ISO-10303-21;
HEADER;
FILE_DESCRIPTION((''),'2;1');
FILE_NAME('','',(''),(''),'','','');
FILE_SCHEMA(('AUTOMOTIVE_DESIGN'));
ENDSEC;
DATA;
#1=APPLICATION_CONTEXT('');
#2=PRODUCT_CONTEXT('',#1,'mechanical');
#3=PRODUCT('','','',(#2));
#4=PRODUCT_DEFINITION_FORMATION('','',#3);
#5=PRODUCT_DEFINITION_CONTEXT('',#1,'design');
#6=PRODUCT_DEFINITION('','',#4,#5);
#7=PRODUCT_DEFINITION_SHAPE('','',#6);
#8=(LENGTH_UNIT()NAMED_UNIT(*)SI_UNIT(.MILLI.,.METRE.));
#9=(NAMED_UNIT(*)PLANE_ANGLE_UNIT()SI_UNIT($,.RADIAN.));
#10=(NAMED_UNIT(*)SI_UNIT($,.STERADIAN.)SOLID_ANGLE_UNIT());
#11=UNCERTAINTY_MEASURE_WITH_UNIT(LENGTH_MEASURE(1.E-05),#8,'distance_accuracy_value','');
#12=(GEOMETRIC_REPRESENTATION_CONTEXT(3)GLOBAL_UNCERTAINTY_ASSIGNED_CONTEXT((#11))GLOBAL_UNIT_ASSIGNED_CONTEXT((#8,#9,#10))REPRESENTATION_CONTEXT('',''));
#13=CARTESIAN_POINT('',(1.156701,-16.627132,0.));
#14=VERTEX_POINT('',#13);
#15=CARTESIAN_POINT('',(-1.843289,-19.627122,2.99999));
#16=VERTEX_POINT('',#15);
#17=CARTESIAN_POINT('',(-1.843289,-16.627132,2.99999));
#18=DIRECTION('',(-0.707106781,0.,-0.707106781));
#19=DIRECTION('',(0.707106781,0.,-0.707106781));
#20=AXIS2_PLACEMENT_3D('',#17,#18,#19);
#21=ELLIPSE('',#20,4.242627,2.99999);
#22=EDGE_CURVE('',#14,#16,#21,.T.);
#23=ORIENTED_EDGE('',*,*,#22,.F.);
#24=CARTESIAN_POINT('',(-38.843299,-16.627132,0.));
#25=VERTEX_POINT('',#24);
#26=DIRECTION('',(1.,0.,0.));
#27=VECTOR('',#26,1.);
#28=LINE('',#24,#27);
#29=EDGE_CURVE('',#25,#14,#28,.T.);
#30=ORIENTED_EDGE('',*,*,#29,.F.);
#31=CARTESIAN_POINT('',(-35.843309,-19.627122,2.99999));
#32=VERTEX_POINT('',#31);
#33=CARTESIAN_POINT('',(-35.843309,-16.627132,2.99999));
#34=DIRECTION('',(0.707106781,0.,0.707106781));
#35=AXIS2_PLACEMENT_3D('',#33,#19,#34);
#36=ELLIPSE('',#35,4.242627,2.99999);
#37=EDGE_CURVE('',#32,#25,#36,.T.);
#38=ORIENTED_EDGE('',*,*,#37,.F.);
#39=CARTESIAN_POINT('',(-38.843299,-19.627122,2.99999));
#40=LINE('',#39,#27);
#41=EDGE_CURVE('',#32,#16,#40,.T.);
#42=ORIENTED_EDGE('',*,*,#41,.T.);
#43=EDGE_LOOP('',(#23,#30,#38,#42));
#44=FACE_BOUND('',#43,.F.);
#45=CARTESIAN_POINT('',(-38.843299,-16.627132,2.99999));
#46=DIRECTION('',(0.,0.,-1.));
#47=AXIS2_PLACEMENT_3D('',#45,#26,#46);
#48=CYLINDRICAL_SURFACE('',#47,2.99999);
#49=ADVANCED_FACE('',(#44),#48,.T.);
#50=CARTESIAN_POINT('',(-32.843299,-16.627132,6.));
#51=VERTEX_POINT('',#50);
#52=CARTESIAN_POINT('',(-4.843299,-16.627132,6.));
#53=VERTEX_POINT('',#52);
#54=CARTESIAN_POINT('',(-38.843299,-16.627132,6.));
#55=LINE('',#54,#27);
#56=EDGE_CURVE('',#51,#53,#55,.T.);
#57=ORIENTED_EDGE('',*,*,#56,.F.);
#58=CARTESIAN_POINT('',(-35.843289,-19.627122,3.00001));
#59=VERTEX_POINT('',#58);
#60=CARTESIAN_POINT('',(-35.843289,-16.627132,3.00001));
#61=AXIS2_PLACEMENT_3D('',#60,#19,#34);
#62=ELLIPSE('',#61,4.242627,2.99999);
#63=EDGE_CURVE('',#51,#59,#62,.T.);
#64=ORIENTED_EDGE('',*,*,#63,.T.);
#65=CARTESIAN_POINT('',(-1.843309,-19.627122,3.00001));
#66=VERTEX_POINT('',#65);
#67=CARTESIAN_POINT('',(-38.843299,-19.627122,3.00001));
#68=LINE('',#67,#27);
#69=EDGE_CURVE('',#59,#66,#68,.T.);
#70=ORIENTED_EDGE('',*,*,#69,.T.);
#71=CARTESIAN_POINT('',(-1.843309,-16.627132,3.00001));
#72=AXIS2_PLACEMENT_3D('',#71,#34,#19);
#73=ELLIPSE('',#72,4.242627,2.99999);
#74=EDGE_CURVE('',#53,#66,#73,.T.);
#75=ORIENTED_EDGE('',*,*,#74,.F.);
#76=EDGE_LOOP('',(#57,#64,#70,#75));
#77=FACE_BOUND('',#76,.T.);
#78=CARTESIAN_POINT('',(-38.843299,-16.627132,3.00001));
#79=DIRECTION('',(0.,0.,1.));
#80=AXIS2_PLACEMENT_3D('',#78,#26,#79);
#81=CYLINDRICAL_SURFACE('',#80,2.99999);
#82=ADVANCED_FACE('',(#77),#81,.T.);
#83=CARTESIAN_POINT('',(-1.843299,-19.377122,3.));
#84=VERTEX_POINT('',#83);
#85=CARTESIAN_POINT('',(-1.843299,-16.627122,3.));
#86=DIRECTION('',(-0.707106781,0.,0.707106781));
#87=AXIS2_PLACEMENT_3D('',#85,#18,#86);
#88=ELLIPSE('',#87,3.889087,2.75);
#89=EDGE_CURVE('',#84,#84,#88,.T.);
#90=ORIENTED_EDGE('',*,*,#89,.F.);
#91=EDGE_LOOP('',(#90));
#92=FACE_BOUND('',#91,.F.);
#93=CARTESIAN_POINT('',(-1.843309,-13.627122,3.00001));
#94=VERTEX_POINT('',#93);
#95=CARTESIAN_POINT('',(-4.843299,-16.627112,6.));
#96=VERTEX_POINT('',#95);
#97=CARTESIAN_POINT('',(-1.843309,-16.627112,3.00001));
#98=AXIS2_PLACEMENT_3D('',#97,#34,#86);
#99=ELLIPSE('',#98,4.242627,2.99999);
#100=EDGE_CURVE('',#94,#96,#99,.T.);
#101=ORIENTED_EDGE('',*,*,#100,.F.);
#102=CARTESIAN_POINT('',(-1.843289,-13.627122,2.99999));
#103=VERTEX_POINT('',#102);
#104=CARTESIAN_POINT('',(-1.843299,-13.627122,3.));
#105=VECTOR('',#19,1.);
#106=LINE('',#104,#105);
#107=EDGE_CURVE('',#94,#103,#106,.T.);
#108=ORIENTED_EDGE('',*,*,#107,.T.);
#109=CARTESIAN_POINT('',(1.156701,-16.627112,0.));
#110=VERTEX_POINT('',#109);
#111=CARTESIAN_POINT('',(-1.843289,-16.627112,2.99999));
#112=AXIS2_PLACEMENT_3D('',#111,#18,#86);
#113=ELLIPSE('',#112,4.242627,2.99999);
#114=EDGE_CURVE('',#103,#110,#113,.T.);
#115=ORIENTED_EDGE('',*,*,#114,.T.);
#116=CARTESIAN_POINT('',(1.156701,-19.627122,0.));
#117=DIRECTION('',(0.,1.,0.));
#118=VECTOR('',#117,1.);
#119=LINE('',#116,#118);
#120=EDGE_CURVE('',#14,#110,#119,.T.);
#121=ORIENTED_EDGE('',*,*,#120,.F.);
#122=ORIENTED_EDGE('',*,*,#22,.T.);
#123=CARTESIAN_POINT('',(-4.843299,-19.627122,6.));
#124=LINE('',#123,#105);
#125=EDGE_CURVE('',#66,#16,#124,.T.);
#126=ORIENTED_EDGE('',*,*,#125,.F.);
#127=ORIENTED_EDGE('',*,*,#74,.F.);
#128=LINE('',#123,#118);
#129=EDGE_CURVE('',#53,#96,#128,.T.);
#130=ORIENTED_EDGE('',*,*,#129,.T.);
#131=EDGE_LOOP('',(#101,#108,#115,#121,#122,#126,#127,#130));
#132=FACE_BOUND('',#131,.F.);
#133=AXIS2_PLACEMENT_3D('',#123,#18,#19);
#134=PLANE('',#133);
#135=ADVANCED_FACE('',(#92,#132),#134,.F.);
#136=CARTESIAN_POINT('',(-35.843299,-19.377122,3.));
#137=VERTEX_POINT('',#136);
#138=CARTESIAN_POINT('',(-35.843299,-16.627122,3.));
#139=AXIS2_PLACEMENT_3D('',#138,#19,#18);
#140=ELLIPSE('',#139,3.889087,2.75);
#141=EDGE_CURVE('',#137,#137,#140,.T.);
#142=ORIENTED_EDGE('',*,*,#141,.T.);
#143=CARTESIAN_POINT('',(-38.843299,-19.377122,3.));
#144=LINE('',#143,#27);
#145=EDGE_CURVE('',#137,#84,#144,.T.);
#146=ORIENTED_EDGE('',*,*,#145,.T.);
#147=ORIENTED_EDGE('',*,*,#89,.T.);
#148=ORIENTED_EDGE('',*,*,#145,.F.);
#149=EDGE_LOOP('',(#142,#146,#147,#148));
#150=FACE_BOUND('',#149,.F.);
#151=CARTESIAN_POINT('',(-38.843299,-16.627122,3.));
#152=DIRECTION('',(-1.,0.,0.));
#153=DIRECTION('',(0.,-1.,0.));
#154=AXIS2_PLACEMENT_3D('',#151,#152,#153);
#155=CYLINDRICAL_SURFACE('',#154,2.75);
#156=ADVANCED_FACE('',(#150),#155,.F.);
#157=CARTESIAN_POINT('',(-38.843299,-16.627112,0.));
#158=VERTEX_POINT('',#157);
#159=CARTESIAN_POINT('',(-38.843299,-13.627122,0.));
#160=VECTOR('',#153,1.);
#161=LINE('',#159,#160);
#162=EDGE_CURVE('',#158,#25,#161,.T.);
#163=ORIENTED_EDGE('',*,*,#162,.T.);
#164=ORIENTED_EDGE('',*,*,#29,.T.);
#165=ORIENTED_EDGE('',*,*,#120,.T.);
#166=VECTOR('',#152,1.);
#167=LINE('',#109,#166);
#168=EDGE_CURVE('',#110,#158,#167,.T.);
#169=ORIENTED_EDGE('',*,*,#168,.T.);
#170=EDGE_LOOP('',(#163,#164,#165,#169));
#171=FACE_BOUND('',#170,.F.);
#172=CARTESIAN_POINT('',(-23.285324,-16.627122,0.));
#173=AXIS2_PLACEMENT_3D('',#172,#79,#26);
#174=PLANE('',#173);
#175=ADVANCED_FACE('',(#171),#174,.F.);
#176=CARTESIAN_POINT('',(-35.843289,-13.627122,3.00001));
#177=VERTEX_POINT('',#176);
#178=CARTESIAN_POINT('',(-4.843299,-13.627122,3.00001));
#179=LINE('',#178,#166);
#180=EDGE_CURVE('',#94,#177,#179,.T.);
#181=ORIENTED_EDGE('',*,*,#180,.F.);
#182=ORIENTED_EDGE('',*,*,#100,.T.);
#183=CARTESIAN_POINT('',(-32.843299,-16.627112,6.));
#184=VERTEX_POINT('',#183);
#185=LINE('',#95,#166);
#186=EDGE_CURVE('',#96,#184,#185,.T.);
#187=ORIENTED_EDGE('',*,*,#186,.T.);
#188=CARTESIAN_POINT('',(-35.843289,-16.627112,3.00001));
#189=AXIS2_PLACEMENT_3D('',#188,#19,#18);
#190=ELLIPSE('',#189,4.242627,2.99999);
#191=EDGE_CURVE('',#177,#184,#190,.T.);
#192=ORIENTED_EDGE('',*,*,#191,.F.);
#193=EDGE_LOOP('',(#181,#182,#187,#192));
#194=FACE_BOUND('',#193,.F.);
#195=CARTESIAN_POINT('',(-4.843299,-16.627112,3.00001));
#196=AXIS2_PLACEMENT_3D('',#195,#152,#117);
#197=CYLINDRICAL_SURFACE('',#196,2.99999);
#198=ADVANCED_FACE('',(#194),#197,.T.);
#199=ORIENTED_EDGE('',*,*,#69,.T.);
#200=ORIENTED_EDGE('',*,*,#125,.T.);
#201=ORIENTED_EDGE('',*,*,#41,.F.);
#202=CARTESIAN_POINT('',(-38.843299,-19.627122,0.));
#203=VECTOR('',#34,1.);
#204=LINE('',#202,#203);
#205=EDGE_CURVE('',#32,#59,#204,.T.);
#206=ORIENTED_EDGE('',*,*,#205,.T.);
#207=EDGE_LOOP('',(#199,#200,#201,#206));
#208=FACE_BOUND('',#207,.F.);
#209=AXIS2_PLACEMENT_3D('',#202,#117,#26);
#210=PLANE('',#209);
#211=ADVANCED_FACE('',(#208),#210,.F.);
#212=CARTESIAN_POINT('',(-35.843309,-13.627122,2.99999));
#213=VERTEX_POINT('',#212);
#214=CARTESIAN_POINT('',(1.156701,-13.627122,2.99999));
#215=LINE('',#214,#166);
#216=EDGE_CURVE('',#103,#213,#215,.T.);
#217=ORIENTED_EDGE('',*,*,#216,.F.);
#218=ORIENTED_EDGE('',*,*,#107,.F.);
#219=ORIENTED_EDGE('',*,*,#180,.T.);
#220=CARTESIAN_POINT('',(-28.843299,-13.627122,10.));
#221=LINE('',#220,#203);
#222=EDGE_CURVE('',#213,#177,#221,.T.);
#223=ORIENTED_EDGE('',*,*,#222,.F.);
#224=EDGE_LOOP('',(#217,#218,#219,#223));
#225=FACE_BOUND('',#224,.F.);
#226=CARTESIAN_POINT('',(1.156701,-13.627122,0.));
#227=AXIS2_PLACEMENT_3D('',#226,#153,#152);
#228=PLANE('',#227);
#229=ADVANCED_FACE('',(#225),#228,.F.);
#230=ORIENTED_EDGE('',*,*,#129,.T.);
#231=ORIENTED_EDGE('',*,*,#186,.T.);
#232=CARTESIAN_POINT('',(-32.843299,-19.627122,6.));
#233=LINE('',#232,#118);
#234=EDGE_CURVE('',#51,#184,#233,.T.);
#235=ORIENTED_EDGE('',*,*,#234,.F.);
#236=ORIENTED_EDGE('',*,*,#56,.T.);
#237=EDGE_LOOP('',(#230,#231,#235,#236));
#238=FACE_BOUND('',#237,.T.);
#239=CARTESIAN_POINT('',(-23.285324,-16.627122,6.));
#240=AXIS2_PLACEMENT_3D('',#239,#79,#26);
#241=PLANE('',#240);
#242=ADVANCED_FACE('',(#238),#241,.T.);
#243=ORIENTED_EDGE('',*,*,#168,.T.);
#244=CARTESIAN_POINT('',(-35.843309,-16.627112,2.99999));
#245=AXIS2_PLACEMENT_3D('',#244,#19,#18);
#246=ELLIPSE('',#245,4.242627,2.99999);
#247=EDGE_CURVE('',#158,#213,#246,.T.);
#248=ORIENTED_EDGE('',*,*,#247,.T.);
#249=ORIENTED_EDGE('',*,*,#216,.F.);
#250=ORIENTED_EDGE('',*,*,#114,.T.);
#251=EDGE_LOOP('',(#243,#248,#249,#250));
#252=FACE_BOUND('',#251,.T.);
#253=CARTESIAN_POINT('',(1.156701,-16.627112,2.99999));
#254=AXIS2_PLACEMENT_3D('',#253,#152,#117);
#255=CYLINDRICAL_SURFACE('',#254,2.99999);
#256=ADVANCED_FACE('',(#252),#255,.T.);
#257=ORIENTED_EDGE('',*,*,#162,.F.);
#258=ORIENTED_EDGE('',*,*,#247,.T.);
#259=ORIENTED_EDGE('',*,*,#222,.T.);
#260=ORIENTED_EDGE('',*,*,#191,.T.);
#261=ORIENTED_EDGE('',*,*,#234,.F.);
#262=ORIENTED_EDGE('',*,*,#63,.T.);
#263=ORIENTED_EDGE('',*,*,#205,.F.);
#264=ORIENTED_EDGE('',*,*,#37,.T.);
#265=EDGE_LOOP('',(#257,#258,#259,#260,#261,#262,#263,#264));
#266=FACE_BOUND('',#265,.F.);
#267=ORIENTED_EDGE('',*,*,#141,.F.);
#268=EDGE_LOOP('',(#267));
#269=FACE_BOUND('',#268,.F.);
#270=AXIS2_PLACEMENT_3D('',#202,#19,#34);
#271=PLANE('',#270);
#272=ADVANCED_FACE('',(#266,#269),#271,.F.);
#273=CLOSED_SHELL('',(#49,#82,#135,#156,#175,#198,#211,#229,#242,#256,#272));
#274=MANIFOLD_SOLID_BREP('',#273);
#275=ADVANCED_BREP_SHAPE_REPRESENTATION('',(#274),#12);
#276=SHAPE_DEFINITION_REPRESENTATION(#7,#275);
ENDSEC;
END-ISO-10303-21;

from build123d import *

# Parameters (mm, degrees)
F1_DEPTH = 6
F3_DEPTH = 6.001
F4_R     = 2.75
F5_DEPTH = 40.001
F6_R     = 2.99999
F7_DEPTH = 6.001


# Not quite as in the source:
# - a fillet or chamfer is up to 0.001 mm smaller than in the source, because OpenCascade refuses the exact size


with BuildPart() as f1:
    # F0 (on Top) → F1 (new body)
    with BuildSketch(Plane.XY):
        with BuildLine():
            Line((-8.5178157315, -13.6271222085), (-38.8432986429, -13.6271222085))
            Line((-38.8432986429, -13.6271222085), (-38.8432986429, -19.6271222085))
            Line((-38.8432986429, -19.6271222085), (-8.5178157315, -19.6271222085))
            ThreePointArc((-8.5178157315, -19.6271222085), (-11.5178157315, -16.6271222085), (-8.5178157315, -13.6271222085))
        make_face()
        with BuildLine():
            Line((1.1567013571, -13.6271222085), (-8.5178157315, -13.6271222085))
            ThreePointArc((-8.5178157315, -13.6271222085), (-6.3964953879, -14.5058018649), (-5.5178157315, -16.6271222085))
            ThreePointArc((-5.5178157315, -16.6271222085), (-6.3964953879, -18.748442552), (-8.5178157315, -19.6271222085))
            Line((-8.5178157315, -19.6271222085), (1.1567013571, -19.6271222085))
            Line((1.1567013571, -19.6271222085), (1.1567013571, -13.6271222085))
        make_face()
        with BuildLine():
            ThreePointArc((-5.5178157315, -16.6271222085), (-6.3964953879, -14.5058018649), (-8.5178157315, -13.6271222085))
            ThreePointArc((-8.5178157315, -13.6271222085), (-11.5178157315, -16.6271222085), (-8.5178157315, -19.6271222085))
            ThreePointArc((-8.5178157315, -19.6271222085), (-6.3964953879, -18.748442552), (-5.5178157315, -16.6271222085))
        make_face()
    extrude(amount=F1_DEPTH)

    # F2 (on face) → F3 (cut, through all)
    with BuildSketch(Plane.XZ.offset(19.6271222085)):
        Polygon((1.1567013571, 6), (-4.8432986429, 6), (1.1567013571, 0), align=None)
    extrude(amount=-F3_DEPTH, mode=Mode.SUBTRACT)

    # F4 (on face) → F5 (cut, through all)
    with BuildSketch(Plane(origin=(-38.8432986429, 0, 0), x_dir=(0, -1, 0), z_dir=(-1, 0, 0))):
        with Locations((16.6271222085, 3)):
            Circle(F4_R)
    extrude(amount=-F5_DEPTH, mode=Mode.SUBTRACT)

    # F6 (radius 3 in the source; OpenCascade refuses exactly that, so slightly less here)
    f6_edges = [f1.edges().sort_by_distance(p)[0] for p in [
        (-21.843299, -19.627122, 6),
        (-21.843299, -13.627122, 6),
        (-18.843299, -13.627122, 0),
        (-18.843299, -19.627122, 0),
    ]]
    fillet(f6_edges, radius=F6_R)

    # F2 (on face) → F7 (cut, through all)
    with BuildSketch(Plane.XZ.offset(19.6271222085)):
        Polygon((-38.8432986429, 0), (-32.8432986429, 6), (-38.8432986429, 6), align=None)
    extrude(amount=-F7_DEPTH, mode=Mode.SUBTRACT)


solid = f1.part
